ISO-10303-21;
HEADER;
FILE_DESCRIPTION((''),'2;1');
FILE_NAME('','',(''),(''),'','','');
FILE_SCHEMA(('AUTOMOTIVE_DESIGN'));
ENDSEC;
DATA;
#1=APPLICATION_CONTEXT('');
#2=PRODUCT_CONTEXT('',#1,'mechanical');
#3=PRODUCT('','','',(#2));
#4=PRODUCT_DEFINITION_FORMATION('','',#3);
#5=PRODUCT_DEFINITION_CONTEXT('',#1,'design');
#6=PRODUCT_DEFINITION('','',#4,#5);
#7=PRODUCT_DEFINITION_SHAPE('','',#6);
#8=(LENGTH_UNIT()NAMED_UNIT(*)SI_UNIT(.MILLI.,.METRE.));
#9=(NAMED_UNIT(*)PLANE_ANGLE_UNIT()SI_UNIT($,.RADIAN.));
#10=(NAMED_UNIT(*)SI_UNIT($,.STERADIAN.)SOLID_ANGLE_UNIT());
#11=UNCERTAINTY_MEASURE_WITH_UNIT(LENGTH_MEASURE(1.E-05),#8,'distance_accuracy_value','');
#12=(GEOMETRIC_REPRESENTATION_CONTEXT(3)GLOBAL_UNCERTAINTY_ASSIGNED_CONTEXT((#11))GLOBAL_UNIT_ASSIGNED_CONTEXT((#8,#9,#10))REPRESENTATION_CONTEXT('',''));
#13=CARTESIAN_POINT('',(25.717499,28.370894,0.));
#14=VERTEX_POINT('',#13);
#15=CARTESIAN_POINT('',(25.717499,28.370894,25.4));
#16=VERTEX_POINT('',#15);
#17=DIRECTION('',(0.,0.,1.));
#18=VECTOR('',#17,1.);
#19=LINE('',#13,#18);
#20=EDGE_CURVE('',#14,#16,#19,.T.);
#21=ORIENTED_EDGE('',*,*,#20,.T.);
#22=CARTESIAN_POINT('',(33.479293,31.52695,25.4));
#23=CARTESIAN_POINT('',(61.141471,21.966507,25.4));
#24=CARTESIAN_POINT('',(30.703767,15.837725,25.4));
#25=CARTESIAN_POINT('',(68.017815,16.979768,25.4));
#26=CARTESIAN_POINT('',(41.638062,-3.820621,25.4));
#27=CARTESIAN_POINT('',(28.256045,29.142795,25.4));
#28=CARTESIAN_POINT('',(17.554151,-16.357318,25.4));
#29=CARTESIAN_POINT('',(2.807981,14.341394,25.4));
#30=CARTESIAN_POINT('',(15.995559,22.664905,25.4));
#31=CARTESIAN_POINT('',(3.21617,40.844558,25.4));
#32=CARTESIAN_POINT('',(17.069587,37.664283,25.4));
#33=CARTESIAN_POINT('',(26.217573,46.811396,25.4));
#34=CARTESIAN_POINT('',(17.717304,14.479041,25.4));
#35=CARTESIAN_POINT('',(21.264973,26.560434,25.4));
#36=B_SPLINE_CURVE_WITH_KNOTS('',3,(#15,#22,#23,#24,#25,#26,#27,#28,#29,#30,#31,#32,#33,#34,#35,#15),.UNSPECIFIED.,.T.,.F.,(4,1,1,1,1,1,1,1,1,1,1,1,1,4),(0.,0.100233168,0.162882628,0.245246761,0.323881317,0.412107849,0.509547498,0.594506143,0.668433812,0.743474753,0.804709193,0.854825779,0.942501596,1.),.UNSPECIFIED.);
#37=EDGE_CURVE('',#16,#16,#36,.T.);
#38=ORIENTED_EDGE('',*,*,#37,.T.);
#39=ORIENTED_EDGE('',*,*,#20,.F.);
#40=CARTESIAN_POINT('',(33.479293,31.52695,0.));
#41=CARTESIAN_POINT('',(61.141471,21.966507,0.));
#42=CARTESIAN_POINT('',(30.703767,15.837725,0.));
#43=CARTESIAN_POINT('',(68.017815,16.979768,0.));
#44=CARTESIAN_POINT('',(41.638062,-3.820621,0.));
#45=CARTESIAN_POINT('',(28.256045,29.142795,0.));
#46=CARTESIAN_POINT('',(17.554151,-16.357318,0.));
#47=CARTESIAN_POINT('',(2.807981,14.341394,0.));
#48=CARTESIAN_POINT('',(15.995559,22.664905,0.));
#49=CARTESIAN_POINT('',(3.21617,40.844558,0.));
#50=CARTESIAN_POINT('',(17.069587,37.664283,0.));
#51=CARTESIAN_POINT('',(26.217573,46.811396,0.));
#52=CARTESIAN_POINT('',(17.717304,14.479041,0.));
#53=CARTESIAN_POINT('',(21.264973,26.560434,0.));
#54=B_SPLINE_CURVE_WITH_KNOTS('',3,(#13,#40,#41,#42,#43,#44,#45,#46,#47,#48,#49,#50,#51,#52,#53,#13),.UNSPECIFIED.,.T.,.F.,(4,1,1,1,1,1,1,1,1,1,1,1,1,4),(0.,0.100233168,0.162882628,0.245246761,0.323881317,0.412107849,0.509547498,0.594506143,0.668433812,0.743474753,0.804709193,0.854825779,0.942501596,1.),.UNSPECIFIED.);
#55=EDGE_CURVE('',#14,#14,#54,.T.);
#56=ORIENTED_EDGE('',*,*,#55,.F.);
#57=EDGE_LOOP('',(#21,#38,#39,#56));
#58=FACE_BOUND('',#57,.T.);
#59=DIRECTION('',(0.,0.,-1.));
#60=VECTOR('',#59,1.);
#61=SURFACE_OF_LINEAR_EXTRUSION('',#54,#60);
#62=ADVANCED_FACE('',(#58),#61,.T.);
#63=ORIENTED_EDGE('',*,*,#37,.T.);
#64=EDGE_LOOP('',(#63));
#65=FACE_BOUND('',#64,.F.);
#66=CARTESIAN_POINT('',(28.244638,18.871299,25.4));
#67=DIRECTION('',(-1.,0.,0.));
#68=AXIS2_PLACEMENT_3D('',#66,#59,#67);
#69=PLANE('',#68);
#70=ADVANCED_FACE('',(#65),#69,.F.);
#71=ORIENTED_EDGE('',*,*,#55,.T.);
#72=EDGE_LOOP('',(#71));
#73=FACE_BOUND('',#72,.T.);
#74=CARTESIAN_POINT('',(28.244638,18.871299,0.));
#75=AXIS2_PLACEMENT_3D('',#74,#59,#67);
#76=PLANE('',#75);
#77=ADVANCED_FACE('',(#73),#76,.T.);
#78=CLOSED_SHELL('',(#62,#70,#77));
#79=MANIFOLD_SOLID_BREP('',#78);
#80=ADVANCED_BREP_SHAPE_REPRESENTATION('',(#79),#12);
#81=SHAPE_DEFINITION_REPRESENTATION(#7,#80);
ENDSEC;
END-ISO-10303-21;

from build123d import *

# Parameters (mm, degrees)
F3_DEPTH = 25.4


# Not quite as in the source:
# - the program builds the solid bodies; features that only make, move or delete a surface that nothing else refers to are left out


with BuildPart() as f3:
    # F2 (on Top) → F3 (new body)
    with BuildSketch(Plane.XY):
        with BuildLine():
            add(Edge.make_bspline(
                [(25.7174987346, 28.3708944917), (33.479293236, 31.5269498912), (61.1414714268, 21.9665068644), (30.7037671855, 15.8377246942), (68.0178153105, 16.9797684407), (41.6380622688, -3.820621335), (28.2560453865, 29.1427953307), (17.5541510214, -16.3573177099), (2.8079813543, 14.3413943563), (15.9955590589, 22.664904938), (3.2161700265, 40.8445582271), (17.069587182, 37.6642827557), (26.217573396, 46.8113956898), (17.7173042764, 14.4790405592), (21.2649726487, 26.5604344244), (25.7174987346, 28.3708944917)],
                knots=[0, 0, 0, 0, 0.1002331682, 0.1628826278, 0.2452467611, 0.3238813165, 0.4121078489, 0.5095474981, 0.5945061426, 0.6684338122, 0.7434747527, 0.8047091928, 0.8548257792, 0.942501596, 1, 1, 1, 1], degree=3))
        make_face()
    extrude(amount=F3_DEPTH)


solid = f3.part
